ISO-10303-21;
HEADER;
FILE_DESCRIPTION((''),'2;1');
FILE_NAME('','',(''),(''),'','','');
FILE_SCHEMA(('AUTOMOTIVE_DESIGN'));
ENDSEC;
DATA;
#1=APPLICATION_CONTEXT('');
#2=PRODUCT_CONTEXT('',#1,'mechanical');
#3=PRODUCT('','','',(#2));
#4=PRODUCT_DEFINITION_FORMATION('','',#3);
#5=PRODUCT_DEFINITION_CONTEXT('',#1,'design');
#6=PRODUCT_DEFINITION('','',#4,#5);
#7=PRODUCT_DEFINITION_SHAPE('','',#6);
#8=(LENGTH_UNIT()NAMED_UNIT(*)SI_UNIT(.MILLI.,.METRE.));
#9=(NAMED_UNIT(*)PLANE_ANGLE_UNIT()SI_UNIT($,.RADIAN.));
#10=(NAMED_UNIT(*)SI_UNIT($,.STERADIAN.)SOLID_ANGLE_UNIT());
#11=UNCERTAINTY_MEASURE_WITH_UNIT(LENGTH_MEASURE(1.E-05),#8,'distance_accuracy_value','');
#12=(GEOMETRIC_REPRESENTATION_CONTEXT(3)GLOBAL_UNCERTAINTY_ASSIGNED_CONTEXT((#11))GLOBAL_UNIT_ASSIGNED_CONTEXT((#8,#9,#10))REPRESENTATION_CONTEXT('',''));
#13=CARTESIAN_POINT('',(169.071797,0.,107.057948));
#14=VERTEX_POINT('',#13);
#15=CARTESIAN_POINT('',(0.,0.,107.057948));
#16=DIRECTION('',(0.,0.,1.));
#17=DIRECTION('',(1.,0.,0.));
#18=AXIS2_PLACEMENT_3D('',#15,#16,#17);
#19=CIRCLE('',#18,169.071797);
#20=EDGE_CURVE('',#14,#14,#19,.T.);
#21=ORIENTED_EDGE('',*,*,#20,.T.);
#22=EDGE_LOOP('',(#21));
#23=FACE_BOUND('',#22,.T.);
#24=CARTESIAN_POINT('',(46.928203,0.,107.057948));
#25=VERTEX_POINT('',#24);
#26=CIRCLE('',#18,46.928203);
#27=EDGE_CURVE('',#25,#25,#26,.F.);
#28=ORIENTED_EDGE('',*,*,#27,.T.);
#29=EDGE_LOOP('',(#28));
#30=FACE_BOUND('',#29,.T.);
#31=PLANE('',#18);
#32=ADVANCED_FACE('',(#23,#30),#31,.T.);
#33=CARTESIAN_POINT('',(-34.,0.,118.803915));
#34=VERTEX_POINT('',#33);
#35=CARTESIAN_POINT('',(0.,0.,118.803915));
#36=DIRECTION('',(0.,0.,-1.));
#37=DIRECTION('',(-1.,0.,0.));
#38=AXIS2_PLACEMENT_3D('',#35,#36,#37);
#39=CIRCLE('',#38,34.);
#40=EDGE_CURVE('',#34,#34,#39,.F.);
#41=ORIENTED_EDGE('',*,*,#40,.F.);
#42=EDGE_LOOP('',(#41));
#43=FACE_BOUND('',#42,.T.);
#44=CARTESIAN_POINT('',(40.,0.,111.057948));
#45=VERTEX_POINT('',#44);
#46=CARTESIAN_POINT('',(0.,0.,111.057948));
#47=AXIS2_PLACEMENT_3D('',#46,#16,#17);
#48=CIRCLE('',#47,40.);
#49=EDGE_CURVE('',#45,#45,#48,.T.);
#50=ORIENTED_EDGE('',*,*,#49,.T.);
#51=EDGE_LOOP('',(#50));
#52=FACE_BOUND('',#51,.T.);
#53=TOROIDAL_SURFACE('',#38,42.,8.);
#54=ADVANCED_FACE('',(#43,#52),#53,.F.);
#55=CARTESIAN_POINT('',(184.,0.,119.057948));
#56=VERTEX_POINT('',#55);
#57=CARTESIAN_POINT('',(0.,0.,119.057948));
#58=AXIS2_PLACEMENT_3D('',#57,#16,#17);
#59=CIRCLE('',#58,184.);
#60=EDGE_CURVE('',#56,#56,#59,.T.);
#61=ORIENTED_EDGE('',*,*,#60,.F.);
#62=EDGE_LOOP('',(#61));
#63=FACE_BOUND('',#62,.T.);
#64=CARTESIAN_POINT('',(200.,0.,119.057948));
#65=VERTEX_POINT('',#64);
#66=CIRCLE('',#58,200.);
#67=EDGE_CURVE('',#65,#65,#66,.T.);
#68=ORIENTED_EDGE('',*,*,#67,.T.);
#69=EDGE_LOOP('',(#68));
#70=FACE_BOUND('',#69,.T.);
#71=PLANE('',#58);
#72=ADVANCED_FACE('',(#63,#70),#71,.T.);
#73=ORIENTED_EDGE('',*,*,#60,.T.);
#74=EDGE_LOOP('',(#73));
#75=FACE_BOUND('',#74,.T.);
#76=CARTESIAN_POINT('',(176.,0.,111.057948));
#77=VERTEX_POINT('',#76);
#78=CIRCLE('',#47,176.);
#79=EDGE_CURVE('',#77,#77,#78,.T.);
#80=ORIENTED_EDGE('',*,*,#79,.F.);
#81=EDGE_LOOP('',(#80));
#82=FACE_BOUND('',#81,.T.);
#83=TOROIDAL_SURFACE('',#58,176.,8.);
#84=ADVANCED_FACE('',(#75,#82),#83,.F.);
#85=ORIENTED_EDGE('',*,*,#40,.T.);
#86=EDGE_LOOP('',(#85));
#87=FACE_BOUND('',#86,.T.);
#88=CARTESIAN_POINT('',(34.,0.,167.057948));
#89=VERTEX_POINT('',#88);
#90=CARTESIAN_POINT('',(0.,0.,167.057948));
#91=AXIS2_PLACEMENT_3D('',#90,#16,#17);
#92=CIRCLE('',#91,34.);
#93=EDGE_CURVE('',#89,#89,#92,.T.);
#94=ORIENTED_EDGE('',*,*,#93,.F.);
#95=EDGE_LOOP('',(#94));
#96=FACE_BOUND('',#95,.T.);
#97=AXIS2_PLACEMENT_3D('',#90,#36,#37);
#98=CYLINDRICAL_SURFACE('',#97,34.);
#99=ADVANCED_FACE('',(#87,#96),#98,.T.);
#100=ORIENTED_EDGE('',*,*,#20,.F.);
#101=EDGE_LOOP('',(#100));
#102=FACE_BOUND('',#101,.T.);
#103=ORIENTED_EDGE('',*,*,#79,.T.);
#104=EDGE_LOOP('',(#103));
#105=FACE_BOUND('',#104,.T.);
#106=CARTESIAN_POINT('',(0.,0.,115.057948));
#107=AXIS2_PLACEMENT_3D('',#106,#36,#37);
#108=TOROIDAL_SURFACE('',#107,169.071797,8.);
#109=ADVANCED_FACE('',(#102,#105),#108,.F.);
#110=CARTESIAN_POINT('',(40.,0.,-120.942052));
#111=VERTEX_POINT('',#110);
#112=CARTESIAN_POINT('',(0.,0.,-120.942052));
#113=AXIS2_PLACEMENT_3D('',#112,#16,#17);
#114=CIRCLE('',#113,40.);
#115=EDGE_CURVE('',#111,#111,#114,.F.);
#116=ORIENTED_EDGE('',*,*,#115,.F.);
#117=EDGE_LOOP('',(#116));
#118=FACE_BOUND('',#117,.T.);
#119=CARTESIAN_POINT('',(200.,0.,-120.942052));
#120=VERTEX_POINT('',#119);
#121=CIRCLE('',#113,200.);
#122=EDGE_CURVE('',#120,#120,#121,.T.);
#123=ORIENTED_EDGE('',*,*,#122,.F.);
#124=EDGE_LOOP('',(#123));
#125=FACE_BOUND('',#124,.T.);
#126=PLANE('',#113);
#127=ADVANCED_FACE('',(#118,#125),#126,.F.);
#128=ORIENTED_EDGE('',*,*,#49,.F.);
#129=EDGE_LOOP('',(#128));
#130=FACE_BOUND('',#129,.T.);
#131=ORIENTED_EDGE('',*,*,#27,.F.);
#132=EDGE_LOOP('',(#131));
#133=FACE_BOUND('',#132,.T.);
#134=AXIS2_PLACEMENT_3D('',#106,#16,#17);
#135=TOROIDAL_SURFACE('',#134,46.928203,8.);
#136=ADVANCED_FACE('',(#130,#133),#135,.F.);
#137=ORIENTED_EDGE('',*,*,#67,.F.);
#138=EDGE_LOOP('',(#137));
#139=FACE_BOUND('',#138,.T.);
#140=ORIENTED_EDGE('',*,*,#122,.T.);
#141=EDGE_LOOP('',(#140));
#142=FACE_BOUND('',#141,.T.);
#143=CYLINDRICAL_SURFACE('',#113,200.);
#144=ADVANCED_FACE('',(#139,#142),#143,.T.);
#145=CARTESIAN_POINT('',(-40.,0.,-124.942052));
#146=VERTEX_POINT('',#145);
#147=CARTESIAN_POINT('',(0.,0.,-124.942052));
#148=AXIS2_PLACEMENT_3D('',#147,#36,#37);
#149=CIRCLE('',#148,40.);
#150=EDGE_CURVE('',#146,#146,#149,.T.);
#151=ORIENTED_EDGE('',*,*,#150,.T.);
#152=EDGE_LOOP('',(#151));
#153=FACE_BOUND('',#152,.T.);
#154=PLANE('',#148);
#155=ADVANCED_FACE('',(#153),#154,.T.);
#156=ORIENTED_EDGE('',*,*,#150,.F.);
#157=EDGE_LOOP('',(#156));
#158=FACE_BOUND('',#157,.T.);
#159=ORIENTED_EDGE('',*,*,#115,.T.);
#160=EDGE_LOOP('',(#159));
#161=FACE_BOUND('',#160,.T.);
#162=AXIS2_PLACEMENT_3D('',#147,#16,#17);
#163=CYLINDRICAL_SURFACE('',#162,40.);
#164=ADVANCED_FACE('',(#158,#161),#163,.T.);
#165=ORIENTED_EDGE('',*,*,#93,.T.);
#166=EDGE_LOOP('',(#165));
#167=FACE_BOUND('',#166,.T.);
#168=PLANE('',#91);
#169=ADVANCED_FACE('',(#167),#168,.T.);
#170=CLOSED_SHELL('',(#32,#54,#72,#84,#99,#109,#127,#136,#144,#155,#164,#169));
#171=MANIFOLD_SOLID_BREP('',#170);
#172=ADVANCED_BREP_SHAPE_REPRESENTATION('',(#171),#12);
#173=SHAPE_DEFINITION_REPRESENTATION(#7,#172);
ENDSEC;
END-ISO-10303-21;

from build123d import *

# Parameters (mm, degrees)
BOSS_EXTRUDE1_DEPTH      = 150
BOSS_EXTRUDE1_DEPTH_BACK = 150
SKETCH1_R                = 250
SKETCH2_R                = 230
CUT_EXTRUDE2_DEPTH       = 10
SKETCH3_R                = 220
CUT_EXTRUDE3_DEPTH       = 5
FILLET1_R                = 10
FILLET2_R                = 10
SKETCH4_R                = 50
BOSS_EXTRUDE2_DEPTH      = 5
SKETCH5_R                = 42.5
BOSS_EXTRUDE3_DEPTH      = 70
BOSS_EXTRUDE4_START      = 5
SKETCH6_R                = 50
BOSS_EXTRUDE4_DEPTH      = 5
FILLET3_R                = 10
SCALE1_SCALE             = 0.8


# Some blends are built 0.0001 mm under size
with BuildPart() as part:
    # Sketch1 → Boss-Extrude1 (new, two sides: drawn at the far end of the back side and taken through both)
    with BuildSketch(Plane.XY.offset(-BOSS_EXTRUDE1_DEPTH_BACK)):
        Circle(SKETCH1_R)
    extrude(amount=BOSS_EXTRUDE1_DEPTH + BOSS_EXTRUDE1_DEPTH_BACK)

    # Sketch2 → Cut-Extrude2 (cut)
    with BuildSketch(Plane.XY.offset(150)):
        Circle(SKETCH2_R)
    extrude(amount=-CUT_EXTRUDE2_DEPTH, mode=Mode.SUBTRACT)

    # Sketch3 → Cut-Extrude3 (cut)
    with BuildSketch(Plane.XY.offset(140)):
        Circle(SKETCH3_R)
    extrude(amount=-CUT_EXTRUDE3_DEPTH, mode=Mode.SUBTRACT)

    # Fillet1
    fillet1_edges = [part.edges().sort_by_distance(p)[0] for p in [
        (-230, 0, 140),
    ]]
    fillet(fillet1_edges, radius=FILLET1_R - 0.0001)  # a hair under: the kernel refuses the full size

    # Fillet2
    # the kernel refuses this fillet: 10 mm, written as the material it adds along each edge
    with BuildSketch(Plane(origin=(0, 0, 135), x_dir=(1, 0, 0), z_dir=(0, -1, 0))) as fillet2_piece_1:
        with BuildLine():
            CenterArc((211.339745962, 10), FILLET2_R, 270, 60)
            Line((211.339745962, 0), (211.339745962, -0.2))
            Line((211.339745962, -0.2), (220, -0.2))
            Line((220, -0.2), (220.2, 0))
            ThreePointArc((220.2, 0), (220.2, 2.5), (220.173205081, 4.9))
            Line((220.173205081, 4.9), (220, 5))
        make_face()
    revolve(axis=Axis((0, 0, 135), (0, 0, 1)))

    # Sketch4 → Boss-Extrude2 (add)
    with BuildSketch(Plane.XY.offset(135)):
        Circle(SKETCH4_R)
    extrude(amount=BOSS_EXTRUDE2_DEPTH)

    # Sketch5 → Boss-Extrude3 (add)
    with BuildSketch(Plane.XY.offset(140)):
        Circle(SKETCH5_R)
    extrude(amount=BOSS_EXTRUDE3_DEPTH)

    # Sketch6 → Boss-Extrude4 (add)
    with BuildSketch(Plane(origin=(0, 0, -150), x_dir=(-1, 0, 0), z_dir=(0, 0, -1)).offset(BOSS_EXTRUDE4_START)):
        with Locations(Location((0, 0, 0), (0, 0, 180))):
            Circle(SKETCH6_R)
    extrude(amount=-BOSS_EXTRUDE4_DEPTH)

    # Fillet3
    # the kernel refuses this fillet: 10 mm, written as the material it adds along each edge
    with BuildSketch(Plane(origin=(0, 0, 135), x_dir=(1, 0, 0), z_dir=(0, -1, 0))) as fillet3_piece_1:
        with BuildLine():
            CenterArc((58.660254038, 10), FILLET3_R, 210, 60)
            Line((50, 5), (49.826794919, 4.9))
            ThreePointArc((49.826794919, 4.9), (49.8, 2.5), (49.8, 0))
            Line((49.8, 0), (50, -0.2))
            Line((50, -0.2), (58.660254038, -0.2))
            Line((58.660254038, -0.2), (58.660254038, 0))
        make_face()
    revolve(axis=Axis((0, 0, 135), (0, 0, 1)))
    with BuildSketch(Plane(origin=(0, 0, 140), x_dir=(1, 0, 0), z_dir=(0, -1, 0))) as fillet3_piece_2:
        with BuildLine():
            CenterArc((52.5, 9.682458366), FILLET3_R, 180, 75.522487814)
            Line((42.5, 9.682458366), (42.3, 9.682458366))
            Line((42.3, 9.682458366), (42.3, 0))
            Line((42.3, 0), (42.5, -0.2))
            ThreePointArc((42.5, -0.2), (46.25, -0.2), (49.95, -0.193649167))
            Line((49.95, -0.193649167), (50, 0))
        make_face()
    revolve(axis=Axis((0, 0, 140), (0, 0, 1)))


with BuildPart() as part_1:
    # Scale1: scaled about (0, 0, -4.710262046)
    add(part.part.scale(SCALE1_SCALE).moved(Location((0, 0, -0.942052409))))


solid = part_1.part
